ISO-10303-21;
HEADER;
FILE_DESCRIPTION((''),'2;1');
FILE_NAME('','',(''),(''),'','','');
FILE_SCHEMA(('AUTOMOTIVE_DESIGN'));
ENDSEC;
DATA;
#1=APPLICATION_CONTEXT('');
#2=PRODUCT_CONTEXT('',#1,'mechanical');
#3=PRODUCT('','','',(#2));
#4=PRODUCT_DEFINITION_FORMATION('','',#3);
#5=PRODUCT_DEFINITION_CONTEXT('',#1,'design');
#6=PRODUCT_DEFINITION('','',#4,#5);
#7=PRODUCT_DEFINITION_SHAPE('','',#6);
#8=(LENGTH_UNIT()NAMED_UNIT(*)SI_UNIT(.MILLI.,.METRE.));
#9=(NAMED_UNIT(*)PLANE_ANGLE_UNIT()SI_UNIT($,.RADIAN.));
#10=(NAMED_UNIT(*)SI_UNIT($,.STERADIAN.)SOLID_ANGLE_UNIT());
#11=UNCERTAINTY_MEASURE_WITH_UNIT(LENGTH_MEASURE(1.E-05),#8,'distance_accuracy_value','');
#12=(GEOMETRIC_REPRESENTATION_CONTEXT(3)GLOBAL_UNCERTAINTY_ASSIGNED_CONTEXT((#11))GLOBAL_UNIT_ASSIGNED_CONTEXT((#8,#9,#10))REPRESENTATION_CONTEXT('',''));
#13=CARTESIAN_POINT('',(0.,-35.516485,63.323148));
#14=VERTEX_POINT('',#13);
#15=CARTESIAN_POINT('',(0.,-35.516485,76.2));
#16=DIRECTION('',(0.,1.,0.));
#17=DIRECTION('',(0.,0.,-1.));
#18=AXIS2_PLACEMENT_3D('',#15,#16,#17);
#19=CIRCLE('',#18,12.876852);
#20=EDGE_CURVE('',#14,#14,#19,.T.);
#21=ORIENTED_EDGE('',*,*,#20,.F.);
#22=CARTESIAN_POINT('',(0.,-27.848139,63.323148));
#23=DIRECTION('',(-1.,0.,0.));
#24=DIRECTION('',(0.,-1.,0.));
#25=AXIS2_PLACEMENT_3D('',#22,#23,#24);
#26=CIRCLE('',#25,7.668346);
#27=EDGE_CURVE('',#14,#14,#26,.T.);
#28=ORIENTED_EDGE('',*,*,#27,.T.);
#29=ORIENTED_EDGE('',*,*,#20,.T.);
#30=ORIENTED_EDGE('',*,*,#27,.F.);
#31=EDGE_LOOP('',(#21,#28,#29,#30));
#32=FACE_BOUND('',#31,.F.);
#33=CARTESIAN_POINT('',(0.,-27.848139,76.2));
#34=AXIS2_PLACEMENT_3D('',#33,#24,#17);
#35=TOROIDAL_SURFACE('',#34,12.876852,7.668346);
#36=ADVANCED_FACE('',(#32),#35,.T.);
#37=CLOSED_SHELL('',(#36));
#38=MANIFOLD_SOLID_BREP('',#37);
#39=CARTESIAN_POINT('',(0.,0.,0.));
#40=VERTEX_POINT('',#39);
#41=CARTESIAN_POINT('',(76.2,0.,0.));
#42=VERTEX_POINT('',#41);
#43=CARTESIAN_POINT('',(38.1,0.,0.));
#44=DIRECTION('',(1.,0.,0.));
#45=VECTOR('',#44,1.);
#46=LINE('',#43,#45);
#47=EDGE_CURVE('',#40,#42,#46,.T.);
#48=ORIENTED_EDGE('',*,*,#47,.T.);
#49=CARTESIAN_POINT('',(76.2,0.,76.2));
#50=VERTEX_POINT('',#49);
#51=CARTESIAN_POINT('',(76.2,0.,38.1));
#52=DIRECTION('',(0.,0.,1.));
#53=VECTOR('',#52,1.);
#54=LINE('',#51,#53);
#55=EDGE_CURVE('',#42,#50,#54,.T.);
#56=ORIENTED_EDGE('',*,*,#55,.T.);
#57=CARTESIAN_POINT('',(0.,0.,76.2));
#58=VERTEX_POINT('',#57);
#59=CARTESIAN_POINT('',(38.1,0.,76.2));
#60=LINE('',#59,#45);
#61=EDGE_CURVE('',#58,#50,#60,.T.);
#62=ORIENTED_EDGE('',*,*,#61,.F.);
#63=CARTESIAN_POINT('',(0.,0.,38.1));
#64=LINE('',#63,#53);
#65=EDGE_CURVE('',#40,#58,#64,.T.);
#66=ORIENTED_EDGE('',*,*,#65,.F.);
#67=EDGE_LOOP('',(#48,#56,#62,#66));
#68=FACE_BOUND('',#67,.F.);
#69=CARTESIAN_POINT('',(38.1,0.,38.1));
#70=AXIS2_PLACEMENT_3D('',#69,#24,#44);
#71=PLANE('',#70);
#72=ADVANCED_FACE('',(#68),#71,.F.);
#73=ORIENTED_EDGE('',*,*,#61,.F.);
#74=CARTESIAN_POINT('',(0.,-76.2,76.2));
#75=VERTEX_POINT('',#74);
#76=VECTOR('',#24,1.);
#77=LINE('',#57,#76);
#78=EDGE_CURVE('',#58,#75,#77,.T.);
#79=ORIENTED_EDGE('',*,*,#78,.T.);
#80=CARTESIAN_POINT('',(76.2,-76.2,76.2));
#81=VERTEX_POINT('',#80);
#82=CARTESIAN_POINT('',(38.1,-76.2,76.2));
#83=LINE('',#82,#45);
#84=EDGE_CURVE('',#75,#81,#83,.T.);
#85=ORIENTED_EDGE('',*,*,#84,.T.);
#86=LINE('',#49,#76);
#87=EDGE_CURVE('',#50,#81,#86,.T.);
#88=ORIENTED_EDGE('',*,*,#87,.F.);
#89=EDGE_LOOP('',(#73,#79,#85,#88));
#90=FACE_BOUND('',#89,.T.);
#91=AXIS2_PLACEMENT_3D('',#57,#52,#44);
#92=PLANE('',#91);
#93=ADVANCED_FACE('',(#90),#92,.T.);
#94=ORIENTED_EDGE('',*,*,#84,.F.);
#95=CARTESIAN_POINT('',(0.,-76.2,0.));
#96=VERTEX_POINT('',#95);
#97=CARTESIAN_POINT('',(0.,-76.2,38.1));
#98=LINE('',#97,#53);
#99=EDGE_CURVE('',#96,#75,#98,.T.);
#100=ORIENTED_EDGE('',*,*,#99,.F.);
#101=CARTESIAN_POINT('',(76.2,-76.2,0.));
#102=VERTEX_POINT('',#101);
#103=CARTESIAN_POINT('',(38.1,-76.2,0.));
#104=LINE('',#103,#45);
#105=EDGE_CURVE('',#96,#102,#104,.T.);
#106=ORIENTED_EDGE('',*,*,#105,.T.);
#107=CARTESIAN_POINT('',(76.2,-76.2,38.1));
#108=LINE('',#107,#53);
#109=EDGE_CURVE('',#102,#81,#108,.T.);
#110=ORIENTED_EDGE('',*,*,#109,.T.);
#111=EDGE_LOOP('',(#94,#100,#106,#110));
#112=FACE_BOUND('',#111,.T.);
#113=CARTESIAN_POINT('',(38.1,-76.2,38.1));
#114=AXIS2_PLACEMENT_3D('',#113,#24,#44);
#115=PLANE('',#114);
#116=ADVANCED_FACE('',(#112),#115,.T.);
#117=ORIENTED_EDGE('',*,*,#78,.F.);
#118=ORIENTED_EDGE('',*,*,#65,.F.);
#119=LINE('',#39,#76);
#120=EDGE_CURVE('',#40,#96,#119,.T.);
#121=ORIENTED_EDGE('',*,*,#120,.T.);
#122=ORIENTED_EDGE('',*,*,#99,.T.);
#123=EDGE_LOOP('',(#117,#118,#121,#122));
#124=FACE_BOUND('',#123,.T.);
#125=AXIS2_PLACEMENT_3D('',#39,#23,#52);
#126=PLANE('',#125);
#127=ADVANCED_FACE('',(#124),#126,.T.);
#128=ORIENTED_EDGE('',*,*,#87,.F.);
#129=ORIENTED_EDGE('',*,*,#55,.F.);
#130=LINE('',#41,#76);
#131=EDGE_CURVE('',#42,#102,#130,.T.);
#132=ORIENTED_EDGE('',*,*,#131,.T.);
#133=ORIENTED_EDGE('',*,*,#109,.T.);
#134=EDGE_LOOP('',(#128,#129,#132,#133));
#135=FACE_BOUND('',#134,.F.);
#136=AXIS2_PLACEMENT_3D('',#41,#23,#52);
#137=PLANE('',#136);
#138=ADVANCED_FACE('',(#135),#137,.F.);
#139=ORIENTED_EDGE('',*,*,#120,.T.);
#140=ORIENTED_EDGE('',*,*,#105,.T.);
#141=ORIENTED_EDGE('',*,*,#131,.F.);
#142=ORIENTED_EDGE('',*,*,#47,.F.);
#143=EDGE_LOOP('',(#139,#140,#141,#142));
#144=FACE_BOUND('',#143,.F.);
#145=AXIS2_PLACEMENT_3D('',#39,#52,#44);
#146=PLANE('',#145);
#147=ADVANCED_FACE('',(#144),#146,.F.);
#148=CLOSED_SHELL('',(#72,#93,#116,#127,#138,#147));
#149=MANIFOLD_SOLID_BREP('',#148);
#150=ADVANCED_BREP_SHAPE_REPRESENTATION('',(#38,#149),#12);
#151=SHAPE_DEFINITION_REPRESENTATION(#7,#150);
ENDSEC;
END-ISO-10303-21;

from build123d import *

# Parameters (mm, degrees)
F0_W     = 76.2
F0_H     = 76.2
F1_DEPTH = 76.2
F5_R     = 7.6683459061


# Not quite as in the source:
# - the program builds the solid bodies; features that only make, move or delete a surface that nothing else refers to are left out


with BuildPart() as f1:
    # F0 (on Front) → F1 (new body)
    with BuildSketch(Plane.XZ):
        with Locations((38.1, 38.1)):
            Rectangle(F0_W, F0_H)
    extrude(amount=F1_DEPTH)


with BuildPart() as f6:
    # F5 (on face) → F6 (revolve)
    with BuildSketch(Plane(origin=(0, 0, 0), x_dir=(0, -1, 0), z_dir=(-1, 0, 0))):
        with Locations((27.8481394053, 63.3231475949)):
            Circle(F5_R)
    revolve(axis=Axis((0, -38.1, 76.2), (0, 1, 0)))


solid = Compound([f1.part, f6.part])
